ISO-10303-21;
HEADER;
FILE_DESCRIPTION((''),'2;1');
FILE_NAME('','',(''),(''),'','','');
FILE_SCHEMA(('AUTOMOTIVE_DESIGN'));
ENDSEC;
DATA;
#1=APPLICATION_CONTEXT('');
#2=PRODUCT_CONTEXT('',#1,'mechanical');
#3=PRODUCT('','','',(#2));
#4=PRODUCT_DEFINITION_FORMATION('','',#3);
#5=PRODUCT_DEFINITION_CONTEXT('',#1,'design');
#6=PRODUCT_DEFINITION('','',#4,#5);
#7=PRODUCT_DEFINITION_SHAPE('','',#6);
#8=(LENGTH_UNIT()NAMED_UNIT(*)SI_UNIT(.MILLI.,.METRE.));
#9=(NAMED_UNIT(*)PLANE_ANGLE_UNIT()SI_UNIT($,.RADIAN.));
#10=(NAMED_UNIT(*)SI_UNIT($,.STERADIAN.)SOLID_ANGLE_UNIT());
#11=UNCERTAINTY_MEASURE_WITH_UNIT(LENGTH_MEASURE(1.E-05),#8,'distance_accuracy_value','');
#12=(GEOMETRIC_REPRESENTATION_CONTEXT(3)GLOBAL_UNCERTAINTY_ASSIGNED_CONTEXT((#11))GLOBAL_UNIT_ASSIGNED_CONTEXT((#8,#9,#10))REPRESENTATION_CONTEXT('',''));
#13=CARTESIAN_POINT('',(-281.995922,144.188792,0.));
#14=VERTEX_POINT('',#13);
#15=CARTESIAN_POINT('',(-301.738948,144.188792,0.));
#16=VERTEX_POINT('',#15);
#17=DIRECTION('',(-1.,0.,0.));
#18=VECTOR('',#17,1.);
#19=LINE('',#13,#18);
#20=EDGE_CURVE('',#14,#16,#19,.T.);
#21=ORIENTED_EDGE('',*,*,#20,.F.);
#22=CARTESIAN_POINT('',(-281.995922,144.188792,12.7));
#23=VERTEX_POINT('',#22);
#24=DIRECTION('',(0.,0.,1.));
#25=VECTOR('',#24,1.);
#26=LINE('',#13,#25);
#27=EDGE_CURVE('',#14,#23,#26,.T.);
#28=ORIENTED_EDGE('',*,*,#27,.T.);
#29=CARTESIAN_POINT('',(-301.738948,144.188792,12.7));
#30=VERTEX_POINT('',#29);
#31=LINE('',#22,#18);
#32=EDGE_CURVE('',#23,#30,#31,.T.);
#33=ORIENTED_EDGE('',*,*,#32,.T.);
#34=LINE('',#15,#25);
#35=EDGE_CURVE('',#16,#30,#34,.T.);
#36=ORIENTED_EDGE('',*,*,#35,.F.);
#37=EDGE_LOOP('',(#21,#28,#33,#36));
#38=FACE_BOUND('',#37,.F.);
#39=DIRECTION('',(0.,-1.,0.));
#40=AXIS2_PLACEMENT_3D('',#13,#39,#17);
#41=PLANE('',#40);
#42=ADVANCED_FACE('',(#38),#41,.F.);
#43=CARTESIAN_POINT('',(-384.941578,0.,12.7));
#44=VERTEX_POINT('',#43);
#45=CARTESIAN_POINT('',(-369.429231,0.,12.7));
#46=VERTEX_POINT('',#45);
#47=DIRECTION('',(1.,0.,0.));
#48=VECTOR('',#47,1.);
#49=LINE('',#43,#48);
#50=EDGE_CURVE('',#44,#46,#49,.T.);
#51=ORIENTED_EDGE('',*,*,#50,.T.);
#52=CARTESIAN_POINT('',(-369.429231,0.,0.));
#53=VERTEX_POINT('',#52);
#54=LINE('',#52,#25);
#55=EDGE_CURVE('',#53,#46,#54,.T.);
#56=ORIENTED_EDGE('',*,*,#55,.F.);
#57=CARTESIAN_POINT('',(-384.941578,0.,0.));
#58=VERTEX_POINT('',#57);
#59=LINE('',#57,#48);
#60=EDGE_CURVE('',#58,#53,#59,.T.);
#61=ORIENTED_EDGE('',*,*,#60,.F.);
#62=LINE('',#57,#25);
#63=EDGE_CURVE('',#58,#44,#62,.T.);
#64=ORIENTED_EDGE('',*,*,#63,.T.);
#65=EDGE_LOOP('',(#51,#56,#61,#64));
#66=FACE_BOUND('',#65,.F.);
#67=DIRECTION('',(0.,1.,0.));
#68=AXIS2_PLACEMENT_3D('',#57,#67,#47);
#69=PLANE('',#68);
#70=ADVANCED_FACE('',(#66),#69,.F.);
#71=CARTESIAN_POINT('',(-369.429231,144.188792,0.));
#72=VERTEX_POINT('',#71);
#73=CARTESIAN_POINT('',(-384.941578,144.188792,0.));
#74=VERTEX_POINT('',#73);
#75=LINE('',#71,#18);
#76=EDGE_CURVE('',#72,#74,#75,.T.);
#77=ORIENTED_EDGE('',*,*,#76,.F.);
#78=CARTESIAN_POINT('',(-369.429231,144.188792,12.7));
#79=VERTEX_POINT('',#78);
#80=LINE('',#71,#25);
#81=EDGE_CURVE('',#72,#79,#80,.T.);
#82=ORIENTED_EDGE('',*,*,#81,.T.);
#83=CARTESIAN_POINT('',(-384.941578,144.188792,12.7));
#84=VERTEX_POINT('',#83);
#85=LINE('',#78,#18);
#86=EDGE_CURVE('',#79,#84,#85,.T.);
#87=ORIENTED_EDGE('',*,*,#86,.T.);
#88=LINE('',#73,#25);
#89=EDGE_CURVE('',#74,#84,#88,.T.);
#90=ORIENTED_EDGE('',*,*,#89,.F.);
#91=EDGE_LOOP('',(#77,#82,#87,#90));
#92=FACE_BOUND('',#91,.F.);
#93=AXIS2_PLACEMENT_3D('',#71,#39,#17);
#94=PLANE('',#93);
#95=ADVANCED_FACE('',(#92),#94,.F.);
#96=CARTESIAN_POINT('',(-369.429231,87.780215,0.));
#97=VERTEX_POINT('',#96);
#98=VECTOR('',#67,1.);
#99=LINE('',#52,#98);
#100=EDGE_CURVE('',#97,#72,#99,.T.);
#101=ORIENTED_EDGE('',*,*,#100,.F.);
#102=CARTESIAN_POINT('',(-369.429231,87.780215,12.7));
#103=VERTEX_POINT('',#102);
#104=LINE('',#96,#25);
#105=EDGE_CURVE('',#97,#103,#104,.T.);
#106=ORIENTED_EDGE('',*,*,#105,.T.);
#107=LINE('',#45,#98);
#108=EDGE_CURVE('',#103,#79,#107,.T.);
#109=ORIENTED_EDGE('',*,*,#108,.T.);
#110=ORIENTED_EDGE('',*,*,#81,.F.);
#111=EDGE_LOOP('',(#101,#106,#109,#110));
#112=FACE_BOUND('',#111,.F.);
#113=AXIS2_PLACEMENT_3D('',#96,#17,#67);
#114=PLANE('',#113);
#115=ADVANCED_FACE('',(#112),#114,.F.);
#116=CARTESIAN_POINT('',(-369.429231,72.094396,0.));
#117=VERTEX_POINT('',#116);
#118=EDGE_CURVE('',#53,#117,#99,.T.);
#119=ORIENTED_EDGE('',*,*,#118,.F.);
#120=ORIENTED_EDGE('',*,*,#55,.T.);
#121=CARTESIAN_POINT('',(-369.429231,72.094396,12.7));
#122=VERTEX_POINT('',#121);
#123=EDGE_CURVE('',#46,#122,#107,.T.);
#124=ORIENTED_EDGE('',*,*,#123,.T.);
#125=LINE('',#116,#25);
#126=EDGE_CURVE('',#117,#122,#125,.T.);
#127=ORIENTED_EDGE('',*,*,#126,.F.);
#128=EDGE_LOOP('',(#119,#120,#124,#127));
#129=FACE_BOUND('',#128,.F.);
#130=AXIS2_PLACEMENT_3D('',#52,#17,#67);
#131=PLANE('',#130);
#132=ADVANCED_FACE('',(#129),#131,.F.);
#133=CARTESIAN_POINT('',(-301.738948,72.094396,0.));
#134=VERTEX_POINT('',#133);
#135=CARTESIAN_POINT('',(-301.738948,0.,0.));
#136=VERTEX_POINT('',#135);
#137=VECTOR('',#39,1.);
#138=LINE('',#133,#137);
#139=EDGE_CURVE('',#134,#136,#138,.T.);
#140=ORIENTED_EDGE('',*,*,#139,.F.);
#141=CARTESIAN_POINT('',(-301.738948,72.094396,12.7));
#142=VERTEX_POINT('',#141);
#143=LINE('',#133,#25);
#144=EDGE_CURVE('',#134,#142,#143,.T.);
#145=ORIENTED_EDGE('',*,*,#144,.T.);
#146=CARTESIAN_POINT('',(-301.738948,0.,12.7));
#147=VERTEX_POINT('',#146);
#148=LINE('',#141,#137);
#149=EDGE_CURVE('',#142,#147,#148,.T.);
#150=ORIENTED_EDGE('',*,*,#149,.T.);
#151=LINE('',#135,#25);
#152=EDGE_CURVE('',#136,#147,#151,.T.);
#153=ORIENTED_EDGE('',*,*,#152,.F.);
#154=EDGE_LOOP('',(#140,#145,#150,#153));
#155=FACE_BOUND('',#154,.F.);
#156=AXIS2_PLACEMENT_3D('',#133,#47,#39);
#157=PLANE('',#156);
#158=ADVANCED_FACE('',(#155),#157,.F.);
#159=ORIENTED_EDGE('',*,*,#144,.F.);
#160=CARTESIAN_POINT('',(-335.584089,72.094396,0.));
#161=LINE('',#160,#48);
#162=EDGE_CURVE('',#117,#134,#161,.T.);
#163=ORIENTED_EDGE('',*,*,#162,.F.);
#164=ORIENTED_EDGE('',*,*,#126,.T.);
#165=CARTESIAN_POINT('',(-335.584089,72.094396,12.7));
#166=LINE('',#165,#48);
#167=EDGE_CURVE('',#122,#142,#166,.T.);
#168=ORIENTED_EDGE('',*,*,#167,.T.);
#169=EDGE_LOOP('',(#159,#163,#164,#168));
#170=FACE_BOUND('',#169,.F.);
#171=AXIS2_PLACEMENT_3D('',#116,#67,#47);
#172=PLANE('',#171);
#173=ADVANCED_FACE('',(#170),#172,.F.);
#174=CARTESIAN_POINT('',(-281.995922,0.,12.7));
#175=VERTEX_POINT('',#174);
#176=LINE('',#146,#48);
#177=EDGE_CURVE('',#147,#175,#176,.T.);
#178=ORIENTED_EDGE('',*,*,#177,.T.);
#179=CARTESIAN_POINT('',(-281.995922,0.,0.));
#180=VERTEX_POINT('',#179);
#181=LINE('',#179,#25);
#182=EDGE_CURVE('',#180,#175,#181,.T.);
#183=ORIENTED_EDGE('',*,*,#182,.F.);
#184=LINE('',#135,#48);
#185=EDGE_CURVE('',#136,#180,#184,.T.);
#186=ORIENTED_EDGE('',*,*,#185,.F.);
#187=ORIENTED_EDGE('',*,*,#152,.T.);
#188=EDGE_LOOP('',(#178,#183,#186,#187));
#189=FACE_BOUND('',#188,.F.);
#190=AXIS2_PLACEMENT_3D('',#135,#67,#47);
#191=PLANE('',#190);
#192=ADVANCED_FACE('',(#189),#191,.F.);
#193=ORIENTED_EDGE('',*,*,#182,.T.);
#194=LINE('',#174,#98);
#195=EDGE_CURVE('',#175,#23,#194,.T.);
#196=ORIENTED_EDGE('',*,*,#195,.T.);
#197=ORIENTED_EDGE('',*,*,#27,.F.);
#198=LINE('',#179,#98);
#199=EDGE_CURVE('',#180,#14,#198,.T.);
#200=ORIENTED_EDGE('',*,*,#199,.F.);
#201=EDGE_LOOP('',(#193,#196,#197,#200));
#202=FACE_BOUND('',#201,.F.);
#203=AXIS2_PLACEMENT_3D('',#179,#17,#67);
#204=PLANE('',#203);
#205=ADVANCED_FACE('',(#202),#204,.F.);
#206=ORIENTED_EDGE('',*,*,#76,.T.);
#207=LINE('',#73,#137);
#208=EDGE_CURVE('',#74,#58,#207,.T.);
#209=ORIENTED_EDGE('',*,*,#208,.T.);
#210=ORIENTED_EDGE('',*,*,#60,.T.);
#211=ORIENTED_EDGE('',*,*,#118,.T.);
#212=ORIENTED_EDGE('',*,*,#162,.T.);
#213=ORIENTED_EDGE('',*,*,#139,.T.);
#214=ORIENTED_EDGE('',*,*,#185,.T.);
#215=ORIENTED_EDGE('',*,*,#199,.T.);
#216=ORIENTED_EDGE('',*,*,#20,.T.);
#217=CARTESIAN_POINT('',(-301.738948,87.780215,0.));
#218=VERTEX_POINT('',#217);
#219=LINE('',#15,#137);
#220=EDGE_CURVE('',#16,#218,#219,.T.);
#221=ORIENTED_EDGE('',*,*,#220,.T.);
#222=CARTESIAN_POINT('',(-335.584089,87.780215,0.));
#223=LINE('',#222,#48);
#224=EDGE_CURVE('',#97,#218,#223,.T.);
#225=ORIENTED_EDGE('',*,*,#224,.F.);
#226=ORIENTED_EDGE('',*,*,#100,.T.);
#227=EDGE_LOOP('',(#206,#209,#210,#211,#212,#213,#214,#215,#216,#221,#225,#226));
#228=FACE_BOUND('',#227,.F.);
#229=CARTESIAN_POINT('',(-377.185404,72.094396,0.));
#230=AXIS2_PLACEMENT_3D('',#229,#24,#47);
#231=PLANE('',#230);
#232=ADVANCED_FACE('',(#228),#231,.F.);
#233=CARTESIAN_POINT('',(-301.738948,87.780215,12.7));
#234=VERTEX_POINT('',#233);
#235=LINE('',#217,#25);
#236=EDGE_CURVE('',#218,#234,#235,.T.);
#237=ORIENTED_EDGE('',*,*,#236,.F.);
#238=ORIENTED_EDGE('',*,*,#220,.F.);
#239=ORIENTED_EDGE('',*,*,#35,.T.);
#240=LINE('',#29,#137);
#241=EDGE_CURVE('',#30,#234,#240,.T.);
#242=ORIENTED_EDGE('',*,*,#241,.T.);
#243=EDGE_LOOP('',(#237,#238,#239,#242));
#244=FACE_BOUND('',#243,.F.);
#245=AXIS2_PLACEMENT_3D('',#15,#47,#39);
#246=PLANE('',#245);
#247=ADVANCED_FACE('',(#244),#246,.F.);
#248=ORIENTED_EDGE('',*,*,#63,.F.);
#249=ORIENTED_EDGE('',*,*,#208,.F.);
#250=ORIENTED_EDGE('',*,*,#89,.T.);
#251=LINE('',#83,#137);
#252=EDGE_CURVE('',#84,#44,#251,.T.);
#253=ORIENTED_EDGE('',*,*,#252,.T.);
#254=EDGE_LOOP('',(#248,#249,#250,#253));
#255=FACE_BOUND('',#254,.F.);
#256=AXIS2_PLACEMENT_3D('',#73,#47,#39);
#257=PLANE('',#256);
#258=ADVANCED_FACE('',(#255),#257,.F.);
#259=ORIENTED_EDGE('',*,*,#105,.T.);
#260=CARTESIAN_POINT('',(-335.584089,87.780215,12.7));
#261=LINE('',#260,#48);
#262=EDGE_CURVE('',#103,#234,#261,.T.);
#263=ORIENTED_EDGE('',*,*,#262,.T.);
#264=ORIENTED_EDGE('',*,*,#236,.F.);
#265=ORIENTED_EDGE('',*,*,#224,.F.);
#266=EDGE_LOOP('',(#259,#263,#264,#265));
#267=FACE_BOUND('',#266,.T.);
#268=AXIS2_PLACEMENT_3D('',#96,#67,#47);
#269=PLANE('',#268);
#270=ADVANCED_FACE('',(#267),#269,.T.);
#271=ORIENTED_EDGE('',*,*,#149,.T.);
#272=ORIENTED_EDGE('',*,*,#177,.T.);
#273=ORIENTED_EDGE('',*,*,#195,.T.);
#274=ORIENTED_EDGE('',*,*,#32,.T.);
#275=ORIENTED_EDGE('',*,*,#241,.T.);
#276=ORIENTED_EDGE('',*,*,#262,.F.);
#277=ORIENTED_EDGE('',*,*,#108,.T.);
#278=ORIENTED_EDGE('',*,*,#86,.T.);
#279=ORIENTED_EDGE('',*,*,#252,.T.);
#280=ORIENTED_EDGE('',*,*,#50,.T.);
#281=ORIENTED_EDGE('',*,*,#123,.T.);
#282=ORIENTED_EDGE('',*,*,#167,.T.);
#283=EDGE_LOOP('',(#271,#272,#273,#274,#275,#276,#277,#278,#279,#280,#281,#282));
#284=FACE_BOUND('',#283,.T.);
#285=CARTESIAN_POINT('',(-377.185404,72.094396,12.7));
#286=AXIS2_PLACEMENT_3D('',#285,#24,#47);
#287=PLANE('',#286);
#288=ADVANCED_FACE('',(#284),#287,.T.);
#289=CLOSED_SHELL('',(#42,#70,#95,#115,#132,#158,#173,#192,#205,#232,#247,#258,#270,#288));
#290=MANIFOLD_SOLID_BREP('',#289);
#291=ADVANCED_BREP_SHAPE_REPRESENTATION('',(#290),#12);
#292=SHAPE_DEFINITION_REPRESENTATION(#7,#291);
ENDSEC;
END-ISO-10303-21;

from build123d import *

# Parameters (mm, degrees)
F0_W     = 67.6902830601
F0_H     = 15.6858190894
F1_DEPTH = 12.7


with BuildPart() as f1:
    # F0 (on Top) → F1 (new body)
    with BuildSketch(Plane.XY):
        Polygon((-369.42923069, 144.1887915134), (-384.9415779114, 144.1887915134), (-384.9415779114, 0), (-369.42923069, 0), (-369.42923069, 72.0943957567), (-369.42923069, 87.7802148461), align=None)
        with Locations((-335.58408916, 79.9373053014)):
            Rectangle(F0_W, F0_H)
        Polygon((-301.7389476299, 144.1887915134), (-301.7389476299, 87.7802148461), (-301.7389476299, 72.0943957567), (-301.7389476299, 0), (-281.995922327, 0), (-281.995922327, 144.1887915134), align=None)
    extrude(amount=F1_DEPTH)


solid = f1.part
